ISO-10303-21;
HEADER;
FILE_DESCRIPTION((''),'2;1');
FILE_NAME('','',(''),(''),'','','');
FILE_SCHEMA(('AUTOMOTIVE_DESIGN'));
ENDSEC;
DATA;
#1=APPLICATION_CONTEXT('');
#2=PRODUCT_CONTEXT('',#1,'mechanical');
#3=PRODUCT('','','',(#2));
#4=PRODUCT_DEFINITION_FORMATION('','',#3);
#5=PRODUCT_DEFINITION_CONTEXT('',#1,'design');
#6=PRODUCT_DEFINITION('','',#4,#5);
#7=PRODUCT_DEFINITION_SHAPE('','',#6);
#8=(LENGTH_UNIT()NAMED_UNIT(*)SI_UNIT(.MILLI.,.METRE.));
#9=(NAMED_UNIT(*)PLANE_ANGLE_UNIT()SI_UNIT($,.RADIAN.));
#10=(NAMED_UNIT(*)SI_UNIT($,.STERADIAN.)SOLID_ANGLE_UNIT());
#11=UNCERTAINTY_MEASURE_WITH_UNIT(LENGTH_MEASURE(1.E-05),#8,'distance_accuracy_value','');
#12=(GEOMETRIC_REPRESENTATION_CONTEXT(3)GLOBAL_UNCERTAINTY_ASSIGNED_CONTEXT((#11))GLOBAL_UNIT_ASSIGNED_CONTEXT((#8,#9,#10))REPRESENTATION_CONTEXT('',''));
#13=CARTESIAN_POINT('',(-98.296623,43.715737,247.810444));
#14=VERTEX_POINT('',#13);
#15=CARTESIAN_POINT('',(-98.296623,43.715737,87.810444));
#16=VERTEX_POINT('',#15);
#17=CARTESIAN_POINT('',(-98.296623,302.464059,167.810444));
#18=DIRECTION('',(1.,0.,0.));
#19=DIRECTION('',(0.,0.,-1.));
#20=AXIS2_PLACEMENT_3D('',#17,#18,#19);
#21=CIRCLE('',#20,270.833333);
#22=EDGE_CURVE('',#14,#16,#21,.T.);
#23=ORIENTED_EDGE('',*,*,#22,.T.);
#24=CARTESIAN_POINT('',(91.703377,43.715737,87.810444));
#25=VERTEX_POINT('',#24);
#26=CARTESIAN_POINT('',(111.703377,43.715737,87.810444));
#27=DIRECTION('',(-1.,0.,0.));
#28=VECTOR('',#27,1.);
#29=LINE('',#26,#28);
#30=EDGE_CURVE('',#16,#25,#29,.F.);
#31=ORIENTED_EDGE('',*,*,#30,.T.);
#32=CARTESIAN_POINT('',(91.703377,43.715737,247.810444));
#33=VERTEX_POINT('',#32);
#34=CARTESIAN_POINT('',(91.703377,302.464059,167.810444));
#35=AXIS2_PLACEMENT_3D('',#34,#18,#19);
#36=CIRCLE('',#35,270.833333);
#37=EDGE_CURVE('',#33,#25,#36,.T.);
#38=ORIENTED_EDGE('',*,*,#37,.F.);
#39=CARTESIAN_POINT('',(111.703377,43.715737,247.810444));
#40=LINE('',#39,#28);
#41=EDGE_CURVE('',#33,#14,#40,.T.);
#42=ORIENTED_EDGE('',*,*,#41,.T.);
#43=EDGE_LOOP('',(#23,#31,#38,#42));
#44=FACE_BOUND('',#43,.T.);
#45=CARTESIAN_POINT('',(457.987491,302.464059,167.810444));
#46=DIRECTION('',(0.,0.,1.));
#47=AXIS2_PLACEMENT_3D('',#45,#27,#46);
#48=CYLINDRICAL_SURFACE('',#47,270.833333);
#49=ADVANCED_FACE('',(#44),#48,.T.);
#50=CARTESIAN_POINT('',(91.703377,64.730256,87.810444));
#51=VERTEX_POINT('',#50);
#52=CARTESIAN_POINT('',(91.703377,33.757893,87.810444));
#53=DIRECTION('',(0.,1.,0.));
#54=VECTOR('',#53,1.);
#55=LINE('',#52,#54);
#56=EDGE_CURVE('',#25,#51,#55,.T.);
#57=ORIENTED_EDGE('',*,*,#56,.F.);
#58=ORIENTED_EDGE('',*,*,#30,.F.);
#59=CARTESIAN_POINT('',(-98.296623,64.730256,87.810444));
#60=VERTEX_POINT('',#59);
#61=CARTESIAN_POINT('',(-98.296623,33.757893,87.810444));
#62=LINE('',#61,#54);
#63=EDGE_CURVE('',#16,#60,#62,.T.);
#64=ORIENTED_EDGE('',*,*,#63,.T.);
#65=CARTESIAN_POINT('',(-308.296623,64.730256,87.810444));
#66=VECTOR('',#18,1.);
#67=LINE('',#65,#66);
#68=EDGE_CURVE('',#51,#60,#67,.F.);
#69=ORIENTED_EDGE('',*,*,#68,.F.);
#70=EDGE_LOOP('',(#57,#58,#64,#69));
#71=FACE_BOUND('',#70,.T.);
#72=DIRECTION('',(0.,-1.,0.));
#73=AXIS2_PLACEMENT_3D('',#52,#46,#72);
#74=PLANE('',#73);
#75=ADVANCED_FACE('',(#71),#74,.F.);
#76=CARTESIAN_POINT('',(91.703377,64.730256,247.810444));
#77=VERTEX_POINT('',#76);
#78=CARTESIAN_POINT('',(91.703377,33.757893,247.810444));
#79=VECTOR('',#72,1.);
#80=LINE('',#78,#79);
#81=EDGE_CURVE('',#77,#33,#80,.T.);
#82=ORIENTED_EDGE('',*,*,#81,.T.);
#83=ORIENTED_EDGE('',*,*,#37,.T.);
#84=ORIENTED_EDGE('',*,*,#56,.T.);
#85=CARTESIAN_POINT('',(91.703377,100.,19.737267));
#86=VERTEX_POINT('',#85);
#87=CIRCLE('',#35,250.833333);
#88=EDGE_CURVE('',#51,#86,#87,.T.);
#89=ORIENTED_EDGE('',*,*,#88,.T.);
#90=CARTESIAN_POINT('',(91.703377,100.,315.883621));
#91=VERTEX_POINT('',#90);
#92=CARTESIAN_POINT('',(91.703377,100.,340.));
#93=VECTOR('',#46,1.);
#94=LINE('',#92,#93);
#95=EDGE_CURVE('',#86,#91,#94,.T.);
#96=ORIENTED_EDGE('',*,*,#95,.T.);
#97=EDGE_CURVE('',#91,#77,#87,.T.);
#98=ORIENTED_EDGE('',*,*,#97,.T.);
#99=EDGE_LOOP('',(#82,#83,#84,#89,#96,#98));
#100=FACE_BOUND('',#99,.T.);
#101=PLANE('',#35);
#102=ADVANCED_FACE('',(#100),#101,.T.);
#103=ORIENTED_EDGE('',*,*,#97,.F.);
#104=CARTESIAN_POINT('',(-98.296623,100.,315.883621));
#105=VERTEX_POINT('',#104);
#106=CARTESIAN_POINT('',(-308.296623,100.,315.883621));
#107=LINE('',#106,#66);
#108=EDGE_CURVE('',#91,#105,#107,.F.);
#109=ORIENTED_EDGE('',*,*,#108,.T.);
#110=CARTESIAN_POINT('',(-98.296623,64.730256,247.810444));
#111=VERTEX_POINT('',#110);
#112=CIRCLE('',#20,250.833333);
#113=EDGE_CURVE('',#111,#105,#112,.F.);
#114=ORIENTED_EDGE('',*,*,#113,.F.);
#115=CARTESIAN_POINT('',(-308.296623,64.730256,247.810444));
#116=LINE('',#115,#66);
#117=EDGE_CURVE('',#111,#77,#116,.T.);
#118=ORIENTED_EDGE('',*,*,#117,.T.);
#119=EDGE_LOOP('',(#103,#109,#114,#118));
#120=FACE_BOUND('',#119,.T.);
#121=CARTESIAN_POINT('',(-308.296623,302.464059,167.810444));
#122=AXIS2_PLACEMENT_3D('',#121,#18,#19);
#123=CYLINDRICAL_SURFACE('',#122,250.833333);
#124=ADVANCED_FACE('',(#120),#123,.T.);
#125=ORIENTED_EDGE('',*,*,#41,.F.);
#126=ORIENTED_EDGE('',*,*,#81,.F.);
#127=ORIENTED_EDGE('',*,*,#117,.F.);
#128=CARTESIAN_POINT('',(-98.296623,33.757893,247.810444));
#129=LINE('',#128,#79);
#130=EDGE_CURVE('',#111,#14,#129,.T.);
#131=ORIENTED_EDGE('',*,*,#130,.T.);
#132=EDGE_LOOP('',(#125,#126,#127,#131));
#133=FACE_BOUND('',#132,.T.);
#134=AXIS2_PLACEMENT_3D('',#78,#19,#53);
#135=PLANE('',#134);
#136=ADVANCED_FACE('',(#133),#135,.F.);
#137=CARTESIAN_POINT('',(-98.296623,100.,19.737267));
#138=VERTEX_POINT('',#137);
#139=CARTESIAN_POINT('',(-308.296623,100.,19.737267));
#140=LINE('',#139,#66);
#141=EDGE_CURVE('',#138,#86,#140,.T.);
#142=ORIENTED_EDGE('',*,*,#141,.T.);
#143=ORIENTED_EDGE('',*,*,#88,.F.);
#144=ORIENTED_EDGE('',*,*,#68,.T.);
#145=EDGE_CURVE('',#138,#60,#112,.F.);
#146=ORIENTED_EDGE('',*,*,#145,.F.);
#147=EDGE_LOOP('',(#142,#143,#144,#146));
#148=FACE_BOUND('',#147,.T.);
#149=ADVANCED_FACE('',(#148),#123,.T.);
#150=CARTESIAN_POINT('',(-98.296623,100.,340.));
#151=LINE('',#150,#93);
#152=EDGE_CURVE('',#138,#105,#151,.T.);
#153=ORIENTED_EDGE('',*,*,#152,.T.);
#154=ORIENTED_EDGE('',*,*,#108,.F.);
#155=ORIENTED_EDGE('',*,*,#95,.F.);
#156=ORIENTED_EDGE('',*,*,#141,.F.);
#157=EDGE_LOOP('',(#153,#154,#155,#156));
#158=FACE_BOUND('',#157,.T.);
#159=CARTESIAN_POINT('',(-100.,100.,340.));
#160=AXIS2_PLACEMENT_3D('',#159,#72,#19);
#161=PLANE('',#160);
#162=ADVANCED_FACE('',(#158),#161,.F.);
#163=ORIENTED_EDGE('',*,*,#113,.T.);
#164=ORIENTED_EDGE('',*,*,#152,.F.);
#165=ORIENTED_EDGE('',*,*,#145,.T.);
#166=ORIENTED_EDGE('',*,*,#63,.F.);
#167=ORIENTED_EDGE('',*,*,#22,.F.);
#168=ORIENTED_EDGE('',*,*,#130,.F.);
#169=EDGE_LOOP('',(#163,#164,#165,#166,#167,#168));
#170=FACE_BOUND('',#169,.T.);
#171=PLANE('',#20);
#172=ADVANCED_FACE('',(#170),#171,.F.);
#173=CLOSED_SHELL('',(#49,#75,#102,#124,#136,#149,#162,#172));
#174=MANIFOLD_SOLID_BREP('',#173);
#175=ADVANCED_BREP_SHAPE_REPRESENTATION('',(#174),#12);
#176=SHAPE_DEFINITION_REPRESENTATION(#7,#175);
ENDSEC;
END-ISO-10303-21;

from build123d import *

# Parameters (mm, degrees)
SKETCH1_W           = 200
SKETCH1_H           = 200
BOSS_EXTRUDE1_DEPTH = 340
CAVITY1_START       = -100
CAVITY1_DEPTH       = 200
CAVITY1_START_2     = 91.703376511
CAVITY1_2_DEPTH     = 8.296623489
CAVITY1_3_DEPTH     = 1.703376511


# Read off the part's stored shape, not the designer's step: Cavity1
with BuildPart() as part:
    # Sketch1 → Boss-Extrude1 (new body)
    with BuildSketch(Plane.XY):
        Rectangle(SKETCH1_W, SKETCH1_H)
    extrude(amount=BOSS_EXTRUDE1_DEPTH)

    # Cavity1 outline → Cavity1 (cut)
    with BuildSketch(Plane.YZ.offset(CAVITY1_START)):
        with BuildLine():
            ThreePointArc((100, 19.737266788), (79.748929914, 52.418363447), (64.730256288, 87.81044393))
            Line((64.730256288, 87.81044393), (43.715736742, 87.81044393))
            ThreePointArc((43.715736742, 87.81044393), (31.630726001, 167.81044393), (43.715736742, 247.81044393))
            Line((43.715736742, 247.81044393), (64.730256288, 247.81044393))
            ThreePointArc((64.730256288, 247.81044393), (79.748929914, 283.202524413), (100, 315.883621072))
            Line((100, 315.883621072), (100, 340))
            Line((100, 340), (-100, 340))
            Line((-100, 340), (-100, 0))
            Line((-100, 0), (100, 0))
            Line((100, 0), (100, 19.737266788))
        make_face()
    extrude(amount=CAVITY1_DEPTH, mode=Mode.SUBTRACT)

    # Cavity1 2 outline → Cavity1 2 (cut)
    with BuildSketch(Plane.YZ.offset(CAVITY1_START_2)):
        with BuildLine():
            Line((43.715736742, 87.81044393), (64.730256288, 87.81044393))
            ThreePointArc((64.730256288, 87.81044393), (79.748929914, 52.418363447), (100, 19.737266788))
            Line((100, 19.737266788), (100, 315.883621072))
            ThreePointArc((100, 315.883621072), (79.748929914, 283.202524413), (64.730256288, 247.81044393))
            Line((64.730256288, 247.81044393), (43.715736742, 247.81044393))
            ThreePointArc((43.715736742, 247.81044393), (31.630726001, 167.81044393), (43.715736742, 87.81044393))
        make_face()
    extrude(amount=CAVITY1_2_DEPTH, mode=Mode.SUBTRACT)

    # Cavity1 3 outline → Cavity1 3 (cut)
    with BuildSketch(Plane.YZ.offset(CAVITY1_START)):
        with BuildLine():
            Line((43.715736742, 87.81044393), (64.730256288, 87.81044393))
            ThreePointArc((64.730256288, 87.81044393), (79.748929914, 52.418363447), (100, 19.737266788))
            Line((100, 19.737266788), (100, 315.883621072))
            ThreePointArc((100, 315.883621072), (79.748929914, 283.202524413), (64.730256288, 247.81044393))
            Line((64.730256288, 247.81044393), (43.715736742, 247.81044393))
            ThreePointArc((43.715736742, 247.81044393), (31.630726001, 167.81044393), (43.715736742, 87.81044393))
        make_face()
    extrude(amount=CAVITY1_3_DEPTH, mode=Mode.SUBTRACT)


solid = part.part
